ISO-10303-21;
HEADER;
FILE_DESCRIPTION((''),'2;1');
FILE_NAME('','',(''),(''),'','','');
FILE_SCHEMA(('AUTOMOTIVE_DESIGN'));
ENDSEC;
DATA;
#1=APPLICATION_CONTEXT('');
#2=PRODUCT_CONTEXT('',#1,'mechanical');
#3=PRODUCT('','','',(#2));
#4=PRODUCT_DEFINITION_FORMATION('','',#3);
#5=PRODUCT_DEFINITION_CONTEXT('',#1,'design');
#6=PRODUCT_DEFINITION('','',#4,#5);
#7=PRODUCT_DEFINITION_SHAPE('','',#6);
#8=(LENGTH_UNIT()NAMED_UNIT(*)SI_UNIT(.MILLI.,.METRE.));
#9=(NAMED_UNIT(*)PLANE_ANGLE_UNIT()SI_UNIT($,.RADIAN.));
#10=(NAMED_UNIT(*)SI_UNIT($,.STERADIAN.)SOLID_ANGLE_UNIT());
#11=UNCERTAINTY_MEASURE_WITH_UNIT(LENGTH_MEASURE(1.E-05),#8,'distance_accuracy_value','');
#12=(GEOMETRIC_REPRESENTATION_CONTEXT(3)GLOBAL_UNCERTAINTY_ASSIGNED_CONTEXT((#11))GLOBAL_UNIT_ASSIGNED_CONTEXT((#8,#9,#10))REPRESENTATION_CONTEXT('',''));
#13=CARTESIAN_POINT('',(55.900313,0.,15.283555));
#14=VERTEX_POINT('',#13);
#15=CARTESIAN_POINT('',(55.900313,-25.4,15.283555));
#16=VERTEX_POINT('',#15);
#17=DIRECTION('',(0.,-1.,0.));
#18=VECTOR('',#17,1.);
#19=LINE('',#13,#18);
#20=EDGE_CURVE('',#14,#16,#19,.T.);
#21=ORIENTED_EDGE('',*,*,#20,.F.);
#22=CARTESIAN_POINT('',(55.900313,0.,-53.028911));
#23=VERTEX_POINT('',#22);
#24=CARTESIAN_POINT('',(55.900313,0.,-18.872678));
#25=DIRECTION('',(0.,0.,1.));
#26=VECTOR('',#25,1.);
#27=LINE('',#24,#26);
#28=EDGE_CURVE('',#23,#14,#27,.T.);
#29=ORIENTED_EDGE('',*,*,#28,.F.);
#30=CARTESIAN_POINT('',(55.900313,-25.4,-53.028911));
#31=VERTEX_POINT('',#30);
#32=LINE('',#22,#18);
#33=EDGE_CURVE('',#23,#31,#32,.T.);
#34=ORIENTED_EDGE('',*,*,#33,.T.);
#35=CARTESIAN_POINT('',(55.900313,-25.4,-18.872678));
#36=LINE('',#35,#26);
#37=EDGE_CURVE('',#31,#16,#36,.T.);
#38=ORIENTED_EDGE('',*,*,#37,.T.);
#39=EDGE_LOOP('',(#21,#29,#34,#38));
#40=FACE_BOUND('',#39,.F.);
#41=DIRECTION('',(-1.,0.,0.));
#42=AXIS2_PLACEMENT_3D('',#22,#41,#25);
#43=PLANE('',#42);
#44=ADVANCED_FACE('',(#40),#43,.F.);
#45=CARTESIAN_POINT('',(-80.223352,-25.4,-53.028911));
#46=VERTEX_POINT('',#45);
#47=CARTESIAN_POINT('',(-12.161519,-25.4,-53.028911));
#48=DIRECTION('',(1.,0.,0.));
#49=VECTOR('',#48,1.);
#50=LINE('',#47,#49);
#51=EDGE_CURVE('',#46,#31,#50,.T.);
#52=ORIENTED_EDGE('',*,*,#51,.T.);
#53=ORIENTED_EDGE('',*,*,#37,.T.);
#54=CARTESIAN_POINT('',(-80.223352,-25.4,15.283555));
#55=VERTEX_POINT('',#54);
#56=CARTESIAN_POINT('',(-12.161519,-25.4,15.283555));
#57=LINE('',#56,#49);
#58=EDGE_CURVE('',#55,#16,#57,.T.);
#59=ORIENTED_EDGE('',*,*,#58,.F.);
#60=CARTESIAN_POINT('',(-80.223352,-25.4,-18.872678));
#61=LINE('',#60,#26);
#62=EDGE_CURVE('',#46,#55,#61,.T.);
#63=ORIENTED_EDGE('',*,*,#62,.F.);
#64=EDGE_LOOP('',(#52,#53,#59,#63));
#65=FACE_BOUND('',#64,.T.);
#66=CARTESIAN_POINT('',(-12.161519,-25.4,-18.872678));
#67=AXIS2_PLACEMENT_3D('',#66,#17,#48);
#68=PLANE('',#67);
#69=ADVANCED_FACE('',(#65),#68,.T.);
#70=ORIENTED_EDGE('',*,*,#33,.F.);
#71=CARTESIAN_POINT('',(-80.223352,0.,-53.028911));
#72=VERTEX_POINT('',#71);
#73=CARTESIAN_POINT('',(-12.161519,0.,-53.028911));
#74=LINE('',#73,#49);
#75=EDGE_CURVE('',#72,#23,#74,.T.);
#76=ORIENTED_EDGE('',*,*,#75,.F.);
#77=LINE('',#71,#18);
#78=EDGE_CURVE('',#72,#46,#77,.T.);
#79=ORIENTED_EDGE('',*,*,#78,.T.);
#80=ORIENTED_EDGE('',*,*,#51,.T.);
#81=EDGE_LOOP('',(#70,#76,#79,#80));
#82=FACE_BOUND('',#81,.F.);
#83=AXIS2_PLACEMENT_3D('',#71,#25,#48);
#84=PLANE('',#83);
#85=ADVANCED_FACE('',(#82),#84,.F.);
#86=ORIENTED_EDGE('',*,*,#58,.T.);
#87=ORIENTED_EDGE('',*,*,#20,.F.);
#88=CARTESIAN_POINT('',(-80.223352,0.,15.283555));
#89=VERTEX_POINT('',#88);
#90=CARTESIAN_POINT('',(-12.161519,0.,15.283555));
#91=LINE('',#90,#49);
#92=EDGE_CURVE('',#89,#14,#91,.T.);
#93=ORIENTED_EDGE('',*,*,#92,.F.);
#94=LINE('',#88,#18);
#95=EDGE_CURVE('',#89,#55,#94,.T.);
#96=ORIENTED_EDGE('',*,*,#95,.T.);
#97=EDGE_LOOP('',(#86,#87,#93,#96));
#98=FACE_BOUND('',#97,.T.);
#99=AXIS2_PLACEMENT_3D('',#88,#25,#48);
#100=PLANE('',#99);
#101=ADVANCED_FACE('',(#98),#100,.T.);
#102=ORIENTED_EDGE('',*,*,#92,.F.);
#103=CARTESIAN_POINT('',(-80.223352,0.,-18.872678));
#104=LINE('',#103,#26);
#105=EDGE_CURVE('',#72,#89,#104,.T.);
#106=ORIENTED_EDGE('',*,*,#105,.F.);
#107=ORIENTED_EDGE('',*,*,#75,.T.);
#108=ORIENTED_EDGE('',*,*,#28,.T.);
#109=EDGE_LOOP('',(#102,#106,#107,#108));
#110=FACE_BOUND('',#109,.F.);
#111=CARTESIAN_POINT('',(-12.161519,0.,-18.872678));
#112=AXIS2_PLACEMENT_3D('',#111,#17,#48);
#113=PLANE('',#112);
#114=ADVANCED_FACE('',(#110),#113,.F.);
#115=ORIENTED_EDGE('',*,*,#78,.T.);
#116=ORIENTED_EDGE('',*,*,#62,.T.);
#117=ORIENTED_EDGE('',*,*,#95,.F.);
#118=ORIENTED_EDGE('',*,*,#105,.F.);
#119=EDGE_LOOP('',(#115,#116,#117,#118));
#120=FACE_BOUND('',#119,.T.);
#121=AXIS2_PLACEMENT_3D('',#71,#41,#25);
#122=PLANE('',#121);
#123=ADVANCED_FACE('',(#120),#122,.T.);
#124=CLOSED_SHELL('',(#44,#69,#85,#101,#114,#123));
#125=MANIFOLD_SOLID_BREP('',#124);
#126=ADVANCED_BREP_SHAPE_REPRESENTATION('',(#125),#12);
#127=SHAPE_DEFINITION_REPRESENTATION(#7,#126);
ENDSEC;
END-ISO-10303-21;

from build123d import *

# Parameters (mm, degrees)
F0_W     = 136.1236646771
F0_H     = 68.3124661446
F1_DEPTH = 25.4


# Not quite as in the source:
# - a feature of the source that left no trace in its solid (it failed there, or was rolled back) is left out


with BuildPart() as f1:
    # F0 (on Front) → F1 (new body)
    with BuildSketch(Plane.XZ):
        with Locations((-12.1615193784, -18.8726782799)):
            Rectangle(F0_W, F0_H)
    extrude(amount=F1_DEPTH)


solid = f1.part
